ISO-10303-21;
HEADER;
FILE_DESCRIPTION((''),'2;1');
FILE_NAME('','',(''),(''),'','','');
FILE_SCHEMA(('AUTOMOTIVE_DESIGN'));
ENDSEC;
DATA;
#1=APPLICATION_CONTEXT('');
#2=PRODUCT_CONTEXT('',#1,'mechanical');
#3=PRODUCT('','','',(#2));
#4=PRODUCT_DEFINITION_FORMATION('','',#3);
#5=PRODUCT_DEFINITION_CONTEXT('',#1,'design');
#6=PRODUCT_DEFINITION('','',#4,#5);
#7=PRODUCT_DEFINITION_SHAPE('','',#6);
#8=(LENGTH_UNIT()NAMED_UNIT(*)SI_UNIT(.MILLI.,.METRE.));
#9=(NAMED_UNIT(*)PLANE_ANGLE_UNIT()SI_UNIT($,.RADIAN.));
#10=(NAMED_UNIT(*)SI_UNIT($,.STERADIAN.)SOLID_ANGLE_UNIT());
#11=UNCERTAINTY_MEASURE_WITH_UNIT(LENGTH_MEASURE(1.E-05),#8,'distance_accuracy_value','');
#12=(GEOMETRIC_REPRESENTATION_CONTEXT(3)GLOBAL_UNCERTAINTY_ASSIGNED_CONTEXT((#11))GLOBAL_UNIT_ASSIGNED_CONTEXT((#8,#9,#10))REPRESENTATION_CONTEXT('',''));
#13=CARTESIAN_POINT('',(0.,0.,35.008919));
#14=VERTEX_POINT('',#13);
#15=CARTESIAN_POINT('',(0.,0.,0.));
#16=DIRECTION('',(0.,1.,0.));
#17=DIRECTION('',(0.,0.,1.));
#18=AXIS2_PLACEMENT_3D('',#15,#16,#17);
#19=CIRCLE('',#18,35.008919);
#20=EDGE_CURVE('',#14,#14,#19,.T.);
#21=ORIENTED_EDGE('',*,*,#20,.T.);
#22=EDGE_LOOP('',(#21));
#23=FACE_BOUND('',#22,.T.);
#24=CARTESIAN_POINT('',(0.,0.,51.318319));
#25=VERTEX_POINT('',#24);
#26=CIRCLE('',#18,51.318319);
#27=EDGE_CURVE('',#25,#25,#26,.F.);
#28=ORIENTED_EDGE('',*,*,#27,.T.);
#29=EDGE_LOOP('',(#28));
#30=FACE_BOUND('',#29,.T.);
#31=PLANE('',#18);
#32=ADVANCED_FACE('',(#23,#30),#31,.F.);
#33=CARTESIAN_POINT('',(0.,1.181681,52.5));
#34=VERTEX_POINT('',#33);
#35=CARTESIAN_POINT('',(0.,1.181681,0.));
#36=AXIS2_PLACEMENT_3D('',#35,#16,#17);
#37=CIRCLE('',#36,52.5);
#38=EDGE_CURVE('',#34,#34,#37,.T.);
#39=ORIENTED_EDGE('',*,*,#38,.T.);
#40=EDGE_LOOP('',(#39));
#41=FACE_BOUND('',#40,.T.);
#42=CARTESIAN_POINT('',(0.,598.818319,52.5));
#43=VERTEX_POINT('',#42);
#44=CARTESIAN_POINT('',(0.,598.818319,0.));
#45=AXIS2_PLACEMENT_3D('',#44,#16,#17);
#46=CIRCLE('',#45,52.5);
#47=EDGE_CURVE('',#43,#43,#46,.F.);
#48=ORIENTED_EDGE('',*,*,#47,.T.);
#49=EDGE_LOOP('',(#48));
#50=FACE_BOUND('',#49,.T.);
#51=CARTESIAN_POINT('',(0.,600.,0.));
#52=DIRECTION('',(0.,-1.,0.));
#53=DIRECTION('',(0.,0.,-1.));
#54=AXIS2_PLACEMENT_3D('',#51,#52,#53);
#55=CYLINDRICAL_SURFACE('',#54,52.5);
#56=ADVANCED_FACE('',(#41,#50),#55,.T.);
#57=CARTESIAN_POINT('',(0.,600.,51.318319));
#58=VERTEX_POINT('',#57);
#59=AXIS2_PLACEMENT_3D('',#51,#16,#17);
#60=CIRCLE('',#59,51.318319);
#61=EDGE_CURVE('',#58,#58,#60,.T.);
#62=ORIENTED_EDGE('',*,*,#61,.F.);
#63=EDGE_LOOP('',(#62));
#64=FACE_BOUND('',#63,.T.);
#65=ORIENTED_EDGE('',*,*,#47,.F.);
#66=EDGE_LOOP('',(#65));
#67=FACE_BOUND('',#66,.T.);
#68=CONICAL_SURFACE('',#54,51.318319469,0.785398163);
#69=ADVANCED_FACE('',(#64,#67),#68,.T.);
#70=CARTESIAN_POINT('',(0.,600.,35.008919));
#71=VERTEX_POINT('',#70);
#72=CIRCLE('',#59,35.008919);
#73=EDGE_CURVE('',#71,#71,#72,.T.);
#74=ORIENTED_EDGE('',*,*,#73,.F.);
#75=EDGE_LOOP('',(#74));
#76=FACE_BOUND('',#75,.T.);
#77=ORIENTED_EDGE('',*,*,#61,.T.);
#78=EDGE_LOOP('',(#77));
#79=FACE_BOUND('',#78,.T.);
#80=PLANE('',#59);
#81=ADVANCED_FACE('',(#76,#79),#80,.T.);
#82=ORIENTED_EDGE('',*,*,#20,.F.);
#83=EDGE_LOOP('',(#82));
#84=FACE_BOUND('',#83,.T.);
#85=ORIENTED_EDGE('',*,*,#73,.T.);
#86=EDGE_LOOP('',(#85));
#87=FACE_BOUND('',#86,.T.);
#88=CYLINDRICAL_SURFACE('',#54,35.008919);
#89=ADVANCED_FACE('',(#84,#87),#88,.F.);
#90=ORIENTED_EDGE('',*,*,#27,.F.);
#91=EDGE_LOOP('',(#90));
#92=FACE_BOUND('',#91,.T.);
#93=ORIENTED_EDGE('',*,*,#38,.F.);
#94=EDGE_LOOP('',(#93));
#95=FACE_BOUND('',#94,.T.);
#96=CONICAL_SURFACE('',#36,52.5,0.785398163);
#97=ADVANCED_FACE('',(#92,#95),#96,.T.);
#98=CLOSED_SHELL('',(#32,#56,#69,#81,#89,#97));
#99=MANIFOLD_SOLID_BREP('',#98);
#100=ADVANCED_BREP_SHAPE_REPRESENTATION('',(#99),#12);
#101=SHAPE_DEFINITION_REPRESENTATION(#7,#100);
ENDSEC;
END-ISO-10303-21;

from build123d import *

# Parameters (mm, degrees)
SKETCH1_R           = 52.5
BOSS_EXTRUDE1_DEPTH = 600
SKETCH2_R           = 35.008918692
CUT_EXTRUDE1_DEPTH  = 605.576297914
CHAMFER1_SIZE       = 1.181680531


with BuildPart() as part:
    # Sketch1 → Boss-Extrude1 (new body)
    with BuildSketch(Plane(origin=(0, 0, 0), x_dir=(1, 0, 0), z_dir=(0, 1, 0))):
        Circle(SKETCH1_R)
    extrude(amount=BOSS_EXTRUDE1_DEPTH)

    # Sketch2 → Cut-Extrude1 (cut, through all)
    with BuildSketch(Plane(origin=(0, 0, 0), x_dir=(1, 0, 0), z_dir=(0, 1, 0))):
        Circle(SKETCH2_R)
    extrude(amount=CUT_EXTRUDE1_DEPTH, mode=Mode.SUBTRACT)

    # Chamfer1
    chamfer1_edges = [part.edges().sort_by_distance(p)[0] for p in [
        (-52.5, 600, 0),
        (-52.5, 0, 0),
    ]]
    chamfer(chamfer1_edges, length=CHAMFER1_SIZE)


solid = part.part
